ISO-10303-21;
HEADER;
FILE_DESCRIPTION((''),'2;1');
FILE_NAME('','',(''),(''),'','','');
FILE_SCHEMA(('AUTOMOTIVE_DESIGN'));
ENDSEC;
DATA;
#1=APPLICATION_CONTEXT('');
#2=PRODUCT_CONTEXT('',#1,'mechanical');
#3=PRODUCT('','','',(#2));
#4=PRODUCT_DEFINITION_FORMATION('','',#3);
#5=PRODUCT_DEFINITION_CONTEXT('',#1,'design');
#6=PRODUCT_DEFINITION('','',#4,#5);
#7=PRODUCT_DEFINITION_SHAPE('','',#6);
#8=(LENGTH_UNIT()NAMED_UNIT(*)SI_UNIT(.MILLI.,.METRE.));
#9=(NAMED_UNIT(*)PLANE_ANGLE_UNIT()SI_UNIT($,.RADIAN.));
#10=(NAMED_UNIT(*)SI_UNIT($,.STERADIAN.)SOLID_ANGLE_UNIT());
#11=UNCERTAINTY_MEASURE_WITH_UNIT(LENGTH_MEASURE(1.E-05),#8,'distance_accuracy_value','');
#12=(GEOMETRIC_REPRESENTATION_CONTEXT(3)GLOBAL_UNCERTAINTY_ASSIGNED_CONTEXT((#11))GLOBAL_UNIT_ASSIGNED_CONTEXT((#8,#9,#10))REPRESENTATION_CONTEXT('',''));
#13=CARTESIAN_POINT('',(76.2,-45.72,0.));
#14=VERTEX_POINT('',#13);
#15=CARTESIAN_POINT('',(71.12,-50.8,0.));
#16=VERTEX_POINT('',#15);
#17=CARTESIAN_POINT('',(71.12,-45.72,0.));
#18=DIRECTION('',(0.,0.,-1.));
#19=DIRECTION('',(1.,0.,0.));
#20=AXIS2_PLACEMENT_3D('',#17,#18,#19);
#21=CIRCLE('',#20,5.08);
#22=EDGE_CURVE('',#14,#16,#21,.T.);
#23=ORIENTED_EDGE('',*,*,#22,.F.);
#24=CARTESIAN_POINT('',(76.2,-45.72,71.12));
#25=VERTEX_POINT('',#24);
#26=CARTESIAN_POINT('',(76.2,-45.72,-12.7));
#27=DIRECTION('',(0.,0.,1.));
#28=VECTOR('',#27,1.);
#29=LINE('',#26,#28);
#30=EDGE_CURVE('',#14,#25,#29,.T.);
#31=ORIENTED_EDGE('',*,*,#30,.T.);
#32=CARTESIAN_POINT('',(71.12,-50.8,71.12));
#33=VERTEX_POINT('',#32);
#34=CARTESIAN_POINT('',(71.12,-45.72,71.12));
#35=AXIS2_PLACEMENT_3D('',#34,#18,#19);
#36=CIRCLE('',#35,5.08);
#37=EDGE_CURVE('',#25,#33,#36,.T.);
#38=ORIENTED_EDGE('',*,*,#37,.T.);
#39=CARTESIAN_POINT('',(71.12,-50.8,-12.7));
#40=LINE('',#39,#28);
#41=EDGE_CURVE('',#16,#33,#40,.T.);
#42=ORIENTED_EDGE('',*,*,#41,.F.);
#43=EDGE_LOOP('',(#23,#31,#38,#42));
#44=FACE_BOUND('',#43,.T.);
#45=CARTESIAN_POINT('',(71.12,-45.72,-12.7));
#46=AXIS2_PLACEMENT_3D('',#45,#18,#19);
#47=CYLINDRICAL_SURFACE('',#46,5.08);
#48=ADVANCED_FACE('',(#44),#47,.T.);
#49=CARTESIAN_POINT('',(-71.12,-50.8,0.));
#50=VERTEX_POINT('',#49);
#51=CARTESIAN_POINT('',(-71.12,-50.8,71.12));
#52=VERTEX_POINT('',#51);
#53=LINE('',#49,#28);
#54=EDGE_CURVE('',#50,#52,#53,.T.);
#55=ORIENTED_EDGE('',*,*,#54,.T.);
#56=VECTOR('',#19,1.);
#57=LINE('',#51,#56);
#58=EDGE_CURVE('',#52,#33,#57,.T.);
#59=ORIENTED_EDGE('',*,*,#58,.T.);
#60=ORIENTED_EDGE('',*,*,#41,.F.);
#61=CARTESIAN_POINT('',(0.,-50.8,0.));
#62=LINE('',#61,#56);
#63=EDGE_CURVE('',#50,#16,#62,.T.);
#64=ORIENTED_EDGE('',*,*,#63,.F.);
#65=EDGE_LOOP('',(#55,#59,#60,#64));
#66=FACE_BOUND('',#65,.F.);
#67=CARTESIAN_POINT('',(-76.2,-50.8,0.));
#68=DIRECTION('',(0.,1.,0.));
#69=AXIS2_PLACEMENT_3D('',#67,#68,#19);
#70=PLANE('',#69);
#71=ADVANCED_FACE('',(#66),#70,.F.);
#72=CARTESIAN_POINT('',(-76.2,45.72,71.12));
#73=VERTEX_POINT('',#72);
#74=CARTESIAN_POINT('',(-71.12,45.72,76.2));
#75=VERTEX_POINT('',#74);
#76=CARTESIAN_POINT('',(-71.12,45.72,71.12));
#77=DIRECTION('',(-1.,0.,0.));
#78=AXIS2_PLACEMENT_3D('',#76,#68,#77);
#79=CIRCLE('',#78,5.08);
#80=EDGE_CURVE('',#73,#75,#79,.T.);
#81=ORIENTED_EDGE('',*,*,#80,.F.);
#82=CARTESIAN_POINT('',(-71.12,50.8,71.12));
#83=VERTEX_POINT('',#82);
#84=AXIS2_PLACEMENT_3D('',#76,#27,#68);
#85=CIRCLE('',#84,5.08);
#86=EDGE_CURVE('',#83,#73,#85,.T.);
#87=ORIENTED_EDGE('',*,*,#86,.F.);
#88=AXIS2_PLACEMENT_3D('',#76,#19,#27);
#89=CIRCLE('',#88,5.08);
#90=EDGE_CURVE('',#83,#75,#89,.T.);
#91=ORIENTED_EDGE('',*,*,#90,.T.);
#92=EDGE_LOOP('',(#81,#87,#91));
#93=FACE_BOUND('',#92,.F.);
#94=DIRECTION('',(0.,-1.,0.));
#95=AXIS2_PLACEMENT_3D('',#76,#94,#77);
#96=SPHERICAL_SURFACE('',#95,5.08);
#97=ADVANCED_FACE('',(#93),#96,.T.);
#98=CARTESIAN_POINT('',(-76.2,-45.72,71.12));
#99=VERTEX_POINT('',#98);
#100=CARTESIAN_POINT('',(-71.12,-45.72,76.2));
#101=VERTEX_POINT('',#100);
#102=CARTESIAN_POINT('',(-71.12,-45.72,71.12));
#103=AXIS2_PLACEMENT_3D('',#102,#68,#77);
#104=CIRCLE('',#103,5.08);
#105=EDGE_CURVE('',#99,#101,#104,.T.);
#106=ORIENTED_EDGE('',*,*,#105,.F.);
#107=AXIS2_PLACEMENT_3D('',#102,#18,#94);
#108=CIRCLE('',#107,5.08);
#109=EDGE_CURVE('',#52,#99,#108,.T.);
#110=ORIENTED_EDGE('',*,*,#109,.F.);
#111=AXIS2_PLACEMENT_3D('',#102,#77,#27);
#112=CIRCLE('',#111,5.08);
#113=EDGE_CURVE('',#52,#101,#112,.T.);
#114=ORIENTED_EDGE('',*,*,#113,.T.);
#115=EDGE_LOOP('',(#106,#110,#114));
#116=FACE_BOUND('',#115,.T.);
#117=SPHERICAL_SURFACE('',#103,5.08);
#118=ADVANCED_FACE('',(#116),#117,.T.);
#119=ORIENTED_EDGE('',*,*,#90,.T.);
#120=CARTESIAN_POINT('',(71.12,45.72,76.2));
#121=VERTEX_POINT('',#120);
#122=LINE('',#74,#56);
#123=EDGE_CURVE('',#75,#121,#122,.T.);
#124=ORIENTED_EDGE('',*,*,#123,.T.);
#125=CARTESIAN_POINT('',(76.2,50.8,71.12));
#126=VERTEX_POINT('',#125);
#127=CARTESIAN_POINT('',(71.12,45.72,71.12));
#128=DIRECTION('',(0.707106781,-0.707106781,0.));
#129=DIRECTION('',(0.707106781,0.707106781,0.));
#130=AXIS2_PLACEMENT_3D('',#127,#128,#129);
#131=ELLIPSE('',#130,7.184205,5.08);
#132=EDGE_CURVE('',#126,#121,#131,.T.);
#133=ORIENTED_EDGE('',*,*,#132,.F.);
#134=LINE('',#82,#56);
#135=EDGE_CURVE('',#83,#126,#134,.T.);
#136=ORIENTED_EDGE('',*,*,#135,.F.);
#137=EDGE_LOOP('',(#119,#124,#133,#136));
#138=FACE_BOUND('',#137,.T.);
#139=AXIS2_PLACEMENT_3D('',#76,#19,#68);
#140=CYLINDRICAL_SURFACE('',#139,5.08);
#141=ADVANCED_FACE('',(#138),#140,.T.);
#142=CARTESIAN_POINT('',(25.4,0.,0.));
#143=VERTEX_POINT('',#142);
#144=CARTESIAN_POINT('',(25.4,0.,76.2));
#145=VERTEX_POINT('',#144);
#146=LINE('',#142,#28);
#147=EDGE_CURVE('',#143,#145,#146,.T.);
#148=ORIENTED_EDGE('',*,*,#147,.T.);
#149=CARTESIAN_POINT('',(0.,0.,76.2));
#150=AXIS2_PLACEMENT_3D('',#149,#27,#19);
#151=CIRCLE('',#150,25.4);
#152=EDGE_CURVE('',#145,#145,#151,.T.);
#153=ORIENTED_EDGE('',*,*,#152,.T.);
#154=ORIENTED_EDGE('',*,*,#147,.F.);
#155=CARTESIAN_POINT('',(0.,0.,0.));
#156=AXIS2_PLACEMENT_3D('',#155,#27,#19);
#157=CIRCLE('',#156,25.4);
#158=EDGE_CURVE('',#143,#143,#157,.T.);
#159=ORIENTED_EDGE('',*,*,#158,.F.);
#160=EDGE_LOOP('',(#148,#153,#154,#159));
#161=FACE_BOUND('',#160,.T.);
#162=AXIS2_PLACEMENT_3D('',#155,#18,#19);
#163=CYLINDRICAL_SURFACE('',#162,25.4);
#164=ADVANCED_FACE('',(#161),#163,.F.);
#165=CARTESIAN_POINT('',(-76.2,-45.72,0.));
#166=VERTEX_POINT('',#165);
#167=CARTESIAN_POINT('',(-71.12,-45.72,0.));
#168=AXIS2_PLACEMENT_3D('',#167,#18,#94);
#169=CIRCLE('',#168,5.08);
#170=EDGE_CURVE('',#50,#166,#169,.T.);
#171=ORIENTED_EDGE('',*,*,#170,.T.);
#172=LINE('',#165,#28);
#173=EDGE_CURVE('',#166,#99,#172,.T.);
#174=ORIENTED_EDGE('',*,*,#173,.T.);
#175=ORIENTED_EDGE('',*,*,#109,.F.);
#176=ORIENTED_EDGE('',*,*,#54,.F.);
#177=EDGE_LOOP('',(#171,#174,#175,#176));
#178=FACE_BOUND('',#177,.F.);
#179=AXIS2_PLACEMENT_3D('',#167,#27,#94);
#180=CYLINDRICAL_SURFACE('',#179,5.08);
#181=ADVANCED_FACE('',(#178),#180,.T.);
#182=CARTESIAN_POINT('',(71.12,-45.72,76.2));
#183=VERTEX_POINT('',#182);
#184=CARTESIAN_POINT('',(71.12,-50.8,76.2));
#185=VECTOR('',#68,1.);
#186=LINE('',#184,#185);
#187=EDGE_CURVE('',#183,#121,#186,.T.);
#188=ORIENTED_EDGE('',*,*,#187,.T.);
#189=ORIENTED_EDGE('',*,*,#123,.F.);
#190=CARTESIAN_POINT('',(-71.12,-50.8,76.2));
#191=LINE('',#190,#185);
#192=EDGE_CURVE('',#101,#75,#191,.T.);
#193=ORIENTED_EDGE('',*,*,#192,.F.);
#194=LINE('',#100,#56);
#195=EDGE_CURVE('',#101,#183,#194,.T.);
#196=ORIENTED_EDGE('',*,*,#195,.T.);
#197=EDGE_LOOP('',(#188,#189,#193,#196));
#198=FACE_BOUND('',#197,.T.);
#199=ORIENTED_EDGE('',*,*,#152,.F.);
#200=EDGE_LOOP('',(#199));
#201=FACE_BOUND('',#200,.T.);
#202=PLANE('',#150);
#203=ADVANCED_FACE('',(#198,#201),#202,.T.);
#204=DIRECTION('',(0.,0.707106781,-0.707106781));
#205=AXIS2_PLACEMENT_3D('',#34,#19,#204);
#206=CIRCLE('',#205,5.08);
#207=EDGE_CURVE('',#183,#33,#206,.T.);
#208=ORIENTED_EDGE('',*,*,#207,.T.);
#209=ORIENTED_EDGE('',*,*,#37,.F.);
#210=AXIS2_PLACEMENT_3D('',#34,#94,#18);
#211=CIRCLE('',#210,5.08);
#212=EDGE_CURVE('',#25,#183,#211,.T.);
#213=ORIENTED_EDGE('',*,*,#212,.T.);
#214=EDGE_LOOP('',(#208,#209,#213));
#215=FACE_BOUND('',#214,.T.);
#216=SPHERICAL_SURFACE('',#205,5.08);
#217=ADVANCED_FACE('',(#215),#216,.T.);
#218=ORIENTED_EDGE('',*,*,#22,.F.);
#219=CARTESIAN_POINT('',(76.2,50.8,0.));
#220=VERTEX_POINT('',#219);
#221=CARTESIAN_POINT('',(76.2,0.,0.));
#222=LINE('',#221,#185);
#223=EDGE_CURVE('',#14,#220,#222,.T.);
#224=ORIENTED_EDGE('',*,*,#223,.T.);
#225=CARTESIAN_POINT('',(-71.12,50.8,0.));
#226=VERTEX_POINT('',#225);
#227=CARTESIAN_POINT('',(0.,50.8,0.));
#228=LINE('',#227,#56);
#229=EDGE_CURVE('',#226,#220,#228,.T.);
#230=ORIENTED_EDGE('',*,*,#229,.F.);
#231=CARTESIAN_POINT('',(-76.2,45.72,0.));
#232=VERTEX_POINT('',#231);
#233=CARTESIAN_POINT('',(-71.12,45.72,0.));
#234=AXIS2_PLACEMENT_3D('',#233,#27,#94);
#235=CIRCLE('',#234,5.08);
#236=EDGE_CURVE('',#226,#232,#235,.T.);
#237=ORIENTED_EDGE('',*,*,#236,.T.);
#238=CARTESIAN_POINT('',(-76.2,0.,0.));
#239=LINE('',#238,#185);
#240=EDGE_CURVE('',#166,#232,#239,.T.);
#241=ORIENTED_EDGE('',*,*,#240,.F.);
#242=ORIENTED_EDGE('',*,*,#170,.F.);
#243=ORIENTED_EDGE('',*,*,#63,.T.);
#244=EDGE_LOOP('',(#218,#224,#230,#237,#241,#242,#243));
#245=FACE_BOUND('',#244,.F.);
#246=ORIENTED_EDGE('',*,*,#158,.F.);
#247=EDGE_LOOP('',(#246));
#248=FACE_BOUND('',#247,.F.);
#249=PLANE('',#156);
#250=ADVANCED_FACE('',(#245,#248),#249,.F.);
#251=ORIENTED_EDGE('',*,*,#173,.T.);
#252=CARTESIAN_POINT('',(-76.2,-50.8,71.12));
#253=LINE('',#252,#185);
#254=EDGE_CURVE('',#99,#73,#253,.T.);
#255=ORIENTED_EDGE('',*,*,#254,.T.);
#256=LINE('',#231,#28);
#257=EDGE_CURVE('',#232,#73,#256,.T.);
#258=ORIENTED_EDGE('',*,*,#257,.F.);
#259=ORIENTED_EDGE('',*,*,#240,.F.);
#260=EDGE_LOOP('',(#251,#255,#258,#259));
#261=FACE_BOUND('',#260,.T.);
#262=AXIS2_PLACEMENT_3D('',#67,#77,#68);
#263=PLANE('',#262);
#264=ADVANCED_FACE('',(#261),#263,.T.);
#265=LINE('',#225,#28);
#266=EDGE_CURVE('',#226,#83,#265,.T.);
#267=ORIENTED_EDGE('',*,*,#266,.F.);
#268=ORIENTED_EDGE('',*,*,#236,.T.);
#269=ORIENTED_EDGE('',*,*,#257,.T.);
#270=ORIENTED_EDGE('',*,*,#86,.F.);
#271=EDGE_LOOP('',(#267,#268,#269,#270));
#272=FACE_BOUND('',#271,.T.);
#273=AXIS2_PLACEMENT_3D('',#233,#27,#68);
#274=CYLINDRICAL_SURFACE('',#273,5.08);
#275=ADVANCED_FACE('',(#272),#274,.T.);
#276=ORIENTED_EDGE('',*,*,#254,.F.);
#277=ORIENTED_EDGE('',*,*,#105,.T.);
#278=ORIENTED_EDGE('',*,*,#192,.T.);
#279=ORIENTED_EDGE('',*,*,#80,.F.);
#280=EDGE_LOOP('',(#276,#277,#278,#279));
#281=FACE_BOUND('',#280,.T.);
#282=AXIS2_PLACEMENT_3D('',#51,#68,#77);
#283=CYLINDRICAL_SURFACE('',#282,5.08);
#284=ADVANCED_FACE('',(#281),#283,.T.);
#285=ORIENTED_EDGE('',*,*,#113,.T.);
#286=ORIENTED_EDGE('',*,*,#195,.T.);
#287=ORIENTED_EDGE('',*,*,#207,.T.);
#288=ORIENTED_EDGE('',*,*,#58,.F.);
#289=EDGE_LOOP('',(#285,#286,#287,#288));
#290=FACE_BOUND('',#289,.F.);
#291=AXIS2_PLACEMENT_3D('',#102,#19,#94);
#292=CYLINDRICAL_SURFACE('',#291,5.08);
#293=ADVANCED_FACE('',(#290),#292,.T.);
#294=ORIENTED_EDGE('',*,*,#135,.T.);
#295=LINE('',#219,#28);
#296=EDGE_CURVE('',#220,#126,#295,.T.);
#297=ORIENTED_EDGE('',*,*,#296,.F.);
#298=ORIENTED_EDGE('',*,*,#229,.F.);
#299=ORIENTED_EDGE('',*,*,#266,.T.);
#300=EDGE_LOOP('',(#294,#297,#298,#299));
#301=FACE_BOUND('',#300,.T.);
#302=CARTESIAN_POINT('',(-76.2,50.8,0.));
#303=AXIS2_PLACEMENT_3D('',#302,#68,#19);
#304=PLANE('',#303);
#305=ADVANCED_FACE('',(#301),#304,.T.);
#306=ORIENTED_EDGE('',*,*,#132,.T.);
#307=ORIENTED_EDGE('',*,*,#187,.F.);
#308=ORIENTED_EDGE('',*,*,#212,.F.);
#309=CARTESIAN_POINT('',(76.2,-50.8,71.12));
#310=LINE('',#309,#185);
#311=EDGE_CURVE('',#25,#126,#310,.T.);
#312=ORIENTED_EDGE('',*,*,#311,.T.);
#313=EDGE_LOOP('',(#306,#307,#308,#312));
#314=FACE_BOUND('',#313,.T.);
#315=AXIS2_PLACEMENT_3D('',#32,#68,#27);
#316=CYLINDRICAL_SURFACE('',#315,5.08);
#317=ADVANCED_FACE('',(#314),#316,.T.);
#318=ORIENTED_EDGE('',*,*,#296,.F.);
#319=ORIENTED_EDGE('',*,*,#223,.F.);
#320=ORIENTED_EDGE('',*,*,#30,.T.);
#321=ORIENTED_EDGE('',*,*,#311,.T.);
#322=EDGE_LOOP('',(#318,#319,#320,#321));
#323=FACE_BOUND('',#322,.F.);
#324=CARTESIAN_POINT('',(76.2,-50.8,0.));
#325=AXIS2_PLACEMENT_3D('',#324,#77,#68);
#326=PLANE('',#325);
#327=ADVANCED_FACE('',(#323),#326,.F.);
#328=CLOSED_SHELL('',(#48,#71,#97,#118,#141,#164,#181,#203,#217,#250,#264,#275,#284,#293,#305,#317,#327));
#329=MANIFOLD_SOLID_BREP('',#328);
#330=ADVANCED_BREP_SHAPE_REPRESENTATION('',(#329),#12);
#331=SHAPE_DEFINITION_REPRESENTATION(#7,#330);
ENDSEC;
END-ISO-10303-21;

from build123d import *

# Parameters (mm, degrees)
F0_W        = 152.4
F0_H        = 101.6
F0_R        = 25.4
F1_DEPTH    = 76.2
F2_R        = 5.08
F3_R        = 5.08
F4_T1_DEPTH = 83.82
F4_S5_W     = 5.08
F4_S5_H     = 5.08
F4_T6_DEPTH = 5.08


# Not quite as in the source:
# - a fillet or chamfer that OpenCascade refuses, or shapes differently, is made with other operations: its cross-section is extruded or revolved along the edge and cut away or added


with BuildPart() as f1:
    # F0 (on Top) → F1 (new body)
    with BuildSketch(Plane.XY):
        Rectangle(F0_W, F0_H)
        Circle(F0_R, mode=Mode.SUBTRACT)
    extrude(amount=F1_DEPTH)

    # F2
    f2_edges = [f1.edges().sort_by_distance(p)[0] for p in [
        (-76.2, 0, 76.2),
    ]]
    fillet(f2_edges, radius=F2_R)

    # F3
    f3_edges = [f1.edges().sort_by_distance(p)[0] for p in [
        (2.54, 50.8, 76.2),
        (76.2, 0, 76.2),
        (2.54, -50.8, 76.2),
    ]]
    fillet(f3_edges, radius=F3_R)

    # F4: fillet of radius 5.08 on 1 edges, made by hand

    # F4_s2 → F4_t1 (cut)
    with BuildSketch(Plane.XY.offset(-12.7)):
        with BuildLine():
            ThreePointArc((76.2, -45.72), (74.7121024484, -49.3121024484), (71.12, -50.8))
            Line((71.12, -50.8), (76.2, -50.8))
            Line((76.2, -50.8), (76.2, -45.72))
        make_face()
    extrude(amount=F4_T1_DEPTH, mode=Mode.SUBTRACT)


with BuildPart() as f4_tool4:
    # F4_s5 → F4_t6 (new body)
    with BuildSketch(Plane.YZ.offset(71.12)):
        with Locations((-48.26, 73.66)):
            Rectangle(F4_S5_W, F4_S5_H)
    extrude(amount=F4_T6_DEPTH)

    # F4_s7 → F4_t8 (revolve, cut)
    with BuildSketch(Plane(origin=(71.12, -45.72, 71.12), x_dir=(0, 0.7071067812, -0.7071067812), z_dir=(0, -0.7071067812, -0.7071067812))):
        with BuildLine():
            ThreePointArc((0, -5.08), (5.08, 0), (0, 5.08))
            Line((0, 5.08), (0, -5.08))
        make_face()
    revolve(axis=Axis((71.12, -45.72, 71.12), (1, 0, 0)), mode=Mode.SUBTRACT)


with BuildPart() as f1_1:
    add(f1.part)

    # F4_t3: cut F4_tool4
    add(f4_tool4.part, mode=Mode.SUBTRACT)


solid = f1_1.part
